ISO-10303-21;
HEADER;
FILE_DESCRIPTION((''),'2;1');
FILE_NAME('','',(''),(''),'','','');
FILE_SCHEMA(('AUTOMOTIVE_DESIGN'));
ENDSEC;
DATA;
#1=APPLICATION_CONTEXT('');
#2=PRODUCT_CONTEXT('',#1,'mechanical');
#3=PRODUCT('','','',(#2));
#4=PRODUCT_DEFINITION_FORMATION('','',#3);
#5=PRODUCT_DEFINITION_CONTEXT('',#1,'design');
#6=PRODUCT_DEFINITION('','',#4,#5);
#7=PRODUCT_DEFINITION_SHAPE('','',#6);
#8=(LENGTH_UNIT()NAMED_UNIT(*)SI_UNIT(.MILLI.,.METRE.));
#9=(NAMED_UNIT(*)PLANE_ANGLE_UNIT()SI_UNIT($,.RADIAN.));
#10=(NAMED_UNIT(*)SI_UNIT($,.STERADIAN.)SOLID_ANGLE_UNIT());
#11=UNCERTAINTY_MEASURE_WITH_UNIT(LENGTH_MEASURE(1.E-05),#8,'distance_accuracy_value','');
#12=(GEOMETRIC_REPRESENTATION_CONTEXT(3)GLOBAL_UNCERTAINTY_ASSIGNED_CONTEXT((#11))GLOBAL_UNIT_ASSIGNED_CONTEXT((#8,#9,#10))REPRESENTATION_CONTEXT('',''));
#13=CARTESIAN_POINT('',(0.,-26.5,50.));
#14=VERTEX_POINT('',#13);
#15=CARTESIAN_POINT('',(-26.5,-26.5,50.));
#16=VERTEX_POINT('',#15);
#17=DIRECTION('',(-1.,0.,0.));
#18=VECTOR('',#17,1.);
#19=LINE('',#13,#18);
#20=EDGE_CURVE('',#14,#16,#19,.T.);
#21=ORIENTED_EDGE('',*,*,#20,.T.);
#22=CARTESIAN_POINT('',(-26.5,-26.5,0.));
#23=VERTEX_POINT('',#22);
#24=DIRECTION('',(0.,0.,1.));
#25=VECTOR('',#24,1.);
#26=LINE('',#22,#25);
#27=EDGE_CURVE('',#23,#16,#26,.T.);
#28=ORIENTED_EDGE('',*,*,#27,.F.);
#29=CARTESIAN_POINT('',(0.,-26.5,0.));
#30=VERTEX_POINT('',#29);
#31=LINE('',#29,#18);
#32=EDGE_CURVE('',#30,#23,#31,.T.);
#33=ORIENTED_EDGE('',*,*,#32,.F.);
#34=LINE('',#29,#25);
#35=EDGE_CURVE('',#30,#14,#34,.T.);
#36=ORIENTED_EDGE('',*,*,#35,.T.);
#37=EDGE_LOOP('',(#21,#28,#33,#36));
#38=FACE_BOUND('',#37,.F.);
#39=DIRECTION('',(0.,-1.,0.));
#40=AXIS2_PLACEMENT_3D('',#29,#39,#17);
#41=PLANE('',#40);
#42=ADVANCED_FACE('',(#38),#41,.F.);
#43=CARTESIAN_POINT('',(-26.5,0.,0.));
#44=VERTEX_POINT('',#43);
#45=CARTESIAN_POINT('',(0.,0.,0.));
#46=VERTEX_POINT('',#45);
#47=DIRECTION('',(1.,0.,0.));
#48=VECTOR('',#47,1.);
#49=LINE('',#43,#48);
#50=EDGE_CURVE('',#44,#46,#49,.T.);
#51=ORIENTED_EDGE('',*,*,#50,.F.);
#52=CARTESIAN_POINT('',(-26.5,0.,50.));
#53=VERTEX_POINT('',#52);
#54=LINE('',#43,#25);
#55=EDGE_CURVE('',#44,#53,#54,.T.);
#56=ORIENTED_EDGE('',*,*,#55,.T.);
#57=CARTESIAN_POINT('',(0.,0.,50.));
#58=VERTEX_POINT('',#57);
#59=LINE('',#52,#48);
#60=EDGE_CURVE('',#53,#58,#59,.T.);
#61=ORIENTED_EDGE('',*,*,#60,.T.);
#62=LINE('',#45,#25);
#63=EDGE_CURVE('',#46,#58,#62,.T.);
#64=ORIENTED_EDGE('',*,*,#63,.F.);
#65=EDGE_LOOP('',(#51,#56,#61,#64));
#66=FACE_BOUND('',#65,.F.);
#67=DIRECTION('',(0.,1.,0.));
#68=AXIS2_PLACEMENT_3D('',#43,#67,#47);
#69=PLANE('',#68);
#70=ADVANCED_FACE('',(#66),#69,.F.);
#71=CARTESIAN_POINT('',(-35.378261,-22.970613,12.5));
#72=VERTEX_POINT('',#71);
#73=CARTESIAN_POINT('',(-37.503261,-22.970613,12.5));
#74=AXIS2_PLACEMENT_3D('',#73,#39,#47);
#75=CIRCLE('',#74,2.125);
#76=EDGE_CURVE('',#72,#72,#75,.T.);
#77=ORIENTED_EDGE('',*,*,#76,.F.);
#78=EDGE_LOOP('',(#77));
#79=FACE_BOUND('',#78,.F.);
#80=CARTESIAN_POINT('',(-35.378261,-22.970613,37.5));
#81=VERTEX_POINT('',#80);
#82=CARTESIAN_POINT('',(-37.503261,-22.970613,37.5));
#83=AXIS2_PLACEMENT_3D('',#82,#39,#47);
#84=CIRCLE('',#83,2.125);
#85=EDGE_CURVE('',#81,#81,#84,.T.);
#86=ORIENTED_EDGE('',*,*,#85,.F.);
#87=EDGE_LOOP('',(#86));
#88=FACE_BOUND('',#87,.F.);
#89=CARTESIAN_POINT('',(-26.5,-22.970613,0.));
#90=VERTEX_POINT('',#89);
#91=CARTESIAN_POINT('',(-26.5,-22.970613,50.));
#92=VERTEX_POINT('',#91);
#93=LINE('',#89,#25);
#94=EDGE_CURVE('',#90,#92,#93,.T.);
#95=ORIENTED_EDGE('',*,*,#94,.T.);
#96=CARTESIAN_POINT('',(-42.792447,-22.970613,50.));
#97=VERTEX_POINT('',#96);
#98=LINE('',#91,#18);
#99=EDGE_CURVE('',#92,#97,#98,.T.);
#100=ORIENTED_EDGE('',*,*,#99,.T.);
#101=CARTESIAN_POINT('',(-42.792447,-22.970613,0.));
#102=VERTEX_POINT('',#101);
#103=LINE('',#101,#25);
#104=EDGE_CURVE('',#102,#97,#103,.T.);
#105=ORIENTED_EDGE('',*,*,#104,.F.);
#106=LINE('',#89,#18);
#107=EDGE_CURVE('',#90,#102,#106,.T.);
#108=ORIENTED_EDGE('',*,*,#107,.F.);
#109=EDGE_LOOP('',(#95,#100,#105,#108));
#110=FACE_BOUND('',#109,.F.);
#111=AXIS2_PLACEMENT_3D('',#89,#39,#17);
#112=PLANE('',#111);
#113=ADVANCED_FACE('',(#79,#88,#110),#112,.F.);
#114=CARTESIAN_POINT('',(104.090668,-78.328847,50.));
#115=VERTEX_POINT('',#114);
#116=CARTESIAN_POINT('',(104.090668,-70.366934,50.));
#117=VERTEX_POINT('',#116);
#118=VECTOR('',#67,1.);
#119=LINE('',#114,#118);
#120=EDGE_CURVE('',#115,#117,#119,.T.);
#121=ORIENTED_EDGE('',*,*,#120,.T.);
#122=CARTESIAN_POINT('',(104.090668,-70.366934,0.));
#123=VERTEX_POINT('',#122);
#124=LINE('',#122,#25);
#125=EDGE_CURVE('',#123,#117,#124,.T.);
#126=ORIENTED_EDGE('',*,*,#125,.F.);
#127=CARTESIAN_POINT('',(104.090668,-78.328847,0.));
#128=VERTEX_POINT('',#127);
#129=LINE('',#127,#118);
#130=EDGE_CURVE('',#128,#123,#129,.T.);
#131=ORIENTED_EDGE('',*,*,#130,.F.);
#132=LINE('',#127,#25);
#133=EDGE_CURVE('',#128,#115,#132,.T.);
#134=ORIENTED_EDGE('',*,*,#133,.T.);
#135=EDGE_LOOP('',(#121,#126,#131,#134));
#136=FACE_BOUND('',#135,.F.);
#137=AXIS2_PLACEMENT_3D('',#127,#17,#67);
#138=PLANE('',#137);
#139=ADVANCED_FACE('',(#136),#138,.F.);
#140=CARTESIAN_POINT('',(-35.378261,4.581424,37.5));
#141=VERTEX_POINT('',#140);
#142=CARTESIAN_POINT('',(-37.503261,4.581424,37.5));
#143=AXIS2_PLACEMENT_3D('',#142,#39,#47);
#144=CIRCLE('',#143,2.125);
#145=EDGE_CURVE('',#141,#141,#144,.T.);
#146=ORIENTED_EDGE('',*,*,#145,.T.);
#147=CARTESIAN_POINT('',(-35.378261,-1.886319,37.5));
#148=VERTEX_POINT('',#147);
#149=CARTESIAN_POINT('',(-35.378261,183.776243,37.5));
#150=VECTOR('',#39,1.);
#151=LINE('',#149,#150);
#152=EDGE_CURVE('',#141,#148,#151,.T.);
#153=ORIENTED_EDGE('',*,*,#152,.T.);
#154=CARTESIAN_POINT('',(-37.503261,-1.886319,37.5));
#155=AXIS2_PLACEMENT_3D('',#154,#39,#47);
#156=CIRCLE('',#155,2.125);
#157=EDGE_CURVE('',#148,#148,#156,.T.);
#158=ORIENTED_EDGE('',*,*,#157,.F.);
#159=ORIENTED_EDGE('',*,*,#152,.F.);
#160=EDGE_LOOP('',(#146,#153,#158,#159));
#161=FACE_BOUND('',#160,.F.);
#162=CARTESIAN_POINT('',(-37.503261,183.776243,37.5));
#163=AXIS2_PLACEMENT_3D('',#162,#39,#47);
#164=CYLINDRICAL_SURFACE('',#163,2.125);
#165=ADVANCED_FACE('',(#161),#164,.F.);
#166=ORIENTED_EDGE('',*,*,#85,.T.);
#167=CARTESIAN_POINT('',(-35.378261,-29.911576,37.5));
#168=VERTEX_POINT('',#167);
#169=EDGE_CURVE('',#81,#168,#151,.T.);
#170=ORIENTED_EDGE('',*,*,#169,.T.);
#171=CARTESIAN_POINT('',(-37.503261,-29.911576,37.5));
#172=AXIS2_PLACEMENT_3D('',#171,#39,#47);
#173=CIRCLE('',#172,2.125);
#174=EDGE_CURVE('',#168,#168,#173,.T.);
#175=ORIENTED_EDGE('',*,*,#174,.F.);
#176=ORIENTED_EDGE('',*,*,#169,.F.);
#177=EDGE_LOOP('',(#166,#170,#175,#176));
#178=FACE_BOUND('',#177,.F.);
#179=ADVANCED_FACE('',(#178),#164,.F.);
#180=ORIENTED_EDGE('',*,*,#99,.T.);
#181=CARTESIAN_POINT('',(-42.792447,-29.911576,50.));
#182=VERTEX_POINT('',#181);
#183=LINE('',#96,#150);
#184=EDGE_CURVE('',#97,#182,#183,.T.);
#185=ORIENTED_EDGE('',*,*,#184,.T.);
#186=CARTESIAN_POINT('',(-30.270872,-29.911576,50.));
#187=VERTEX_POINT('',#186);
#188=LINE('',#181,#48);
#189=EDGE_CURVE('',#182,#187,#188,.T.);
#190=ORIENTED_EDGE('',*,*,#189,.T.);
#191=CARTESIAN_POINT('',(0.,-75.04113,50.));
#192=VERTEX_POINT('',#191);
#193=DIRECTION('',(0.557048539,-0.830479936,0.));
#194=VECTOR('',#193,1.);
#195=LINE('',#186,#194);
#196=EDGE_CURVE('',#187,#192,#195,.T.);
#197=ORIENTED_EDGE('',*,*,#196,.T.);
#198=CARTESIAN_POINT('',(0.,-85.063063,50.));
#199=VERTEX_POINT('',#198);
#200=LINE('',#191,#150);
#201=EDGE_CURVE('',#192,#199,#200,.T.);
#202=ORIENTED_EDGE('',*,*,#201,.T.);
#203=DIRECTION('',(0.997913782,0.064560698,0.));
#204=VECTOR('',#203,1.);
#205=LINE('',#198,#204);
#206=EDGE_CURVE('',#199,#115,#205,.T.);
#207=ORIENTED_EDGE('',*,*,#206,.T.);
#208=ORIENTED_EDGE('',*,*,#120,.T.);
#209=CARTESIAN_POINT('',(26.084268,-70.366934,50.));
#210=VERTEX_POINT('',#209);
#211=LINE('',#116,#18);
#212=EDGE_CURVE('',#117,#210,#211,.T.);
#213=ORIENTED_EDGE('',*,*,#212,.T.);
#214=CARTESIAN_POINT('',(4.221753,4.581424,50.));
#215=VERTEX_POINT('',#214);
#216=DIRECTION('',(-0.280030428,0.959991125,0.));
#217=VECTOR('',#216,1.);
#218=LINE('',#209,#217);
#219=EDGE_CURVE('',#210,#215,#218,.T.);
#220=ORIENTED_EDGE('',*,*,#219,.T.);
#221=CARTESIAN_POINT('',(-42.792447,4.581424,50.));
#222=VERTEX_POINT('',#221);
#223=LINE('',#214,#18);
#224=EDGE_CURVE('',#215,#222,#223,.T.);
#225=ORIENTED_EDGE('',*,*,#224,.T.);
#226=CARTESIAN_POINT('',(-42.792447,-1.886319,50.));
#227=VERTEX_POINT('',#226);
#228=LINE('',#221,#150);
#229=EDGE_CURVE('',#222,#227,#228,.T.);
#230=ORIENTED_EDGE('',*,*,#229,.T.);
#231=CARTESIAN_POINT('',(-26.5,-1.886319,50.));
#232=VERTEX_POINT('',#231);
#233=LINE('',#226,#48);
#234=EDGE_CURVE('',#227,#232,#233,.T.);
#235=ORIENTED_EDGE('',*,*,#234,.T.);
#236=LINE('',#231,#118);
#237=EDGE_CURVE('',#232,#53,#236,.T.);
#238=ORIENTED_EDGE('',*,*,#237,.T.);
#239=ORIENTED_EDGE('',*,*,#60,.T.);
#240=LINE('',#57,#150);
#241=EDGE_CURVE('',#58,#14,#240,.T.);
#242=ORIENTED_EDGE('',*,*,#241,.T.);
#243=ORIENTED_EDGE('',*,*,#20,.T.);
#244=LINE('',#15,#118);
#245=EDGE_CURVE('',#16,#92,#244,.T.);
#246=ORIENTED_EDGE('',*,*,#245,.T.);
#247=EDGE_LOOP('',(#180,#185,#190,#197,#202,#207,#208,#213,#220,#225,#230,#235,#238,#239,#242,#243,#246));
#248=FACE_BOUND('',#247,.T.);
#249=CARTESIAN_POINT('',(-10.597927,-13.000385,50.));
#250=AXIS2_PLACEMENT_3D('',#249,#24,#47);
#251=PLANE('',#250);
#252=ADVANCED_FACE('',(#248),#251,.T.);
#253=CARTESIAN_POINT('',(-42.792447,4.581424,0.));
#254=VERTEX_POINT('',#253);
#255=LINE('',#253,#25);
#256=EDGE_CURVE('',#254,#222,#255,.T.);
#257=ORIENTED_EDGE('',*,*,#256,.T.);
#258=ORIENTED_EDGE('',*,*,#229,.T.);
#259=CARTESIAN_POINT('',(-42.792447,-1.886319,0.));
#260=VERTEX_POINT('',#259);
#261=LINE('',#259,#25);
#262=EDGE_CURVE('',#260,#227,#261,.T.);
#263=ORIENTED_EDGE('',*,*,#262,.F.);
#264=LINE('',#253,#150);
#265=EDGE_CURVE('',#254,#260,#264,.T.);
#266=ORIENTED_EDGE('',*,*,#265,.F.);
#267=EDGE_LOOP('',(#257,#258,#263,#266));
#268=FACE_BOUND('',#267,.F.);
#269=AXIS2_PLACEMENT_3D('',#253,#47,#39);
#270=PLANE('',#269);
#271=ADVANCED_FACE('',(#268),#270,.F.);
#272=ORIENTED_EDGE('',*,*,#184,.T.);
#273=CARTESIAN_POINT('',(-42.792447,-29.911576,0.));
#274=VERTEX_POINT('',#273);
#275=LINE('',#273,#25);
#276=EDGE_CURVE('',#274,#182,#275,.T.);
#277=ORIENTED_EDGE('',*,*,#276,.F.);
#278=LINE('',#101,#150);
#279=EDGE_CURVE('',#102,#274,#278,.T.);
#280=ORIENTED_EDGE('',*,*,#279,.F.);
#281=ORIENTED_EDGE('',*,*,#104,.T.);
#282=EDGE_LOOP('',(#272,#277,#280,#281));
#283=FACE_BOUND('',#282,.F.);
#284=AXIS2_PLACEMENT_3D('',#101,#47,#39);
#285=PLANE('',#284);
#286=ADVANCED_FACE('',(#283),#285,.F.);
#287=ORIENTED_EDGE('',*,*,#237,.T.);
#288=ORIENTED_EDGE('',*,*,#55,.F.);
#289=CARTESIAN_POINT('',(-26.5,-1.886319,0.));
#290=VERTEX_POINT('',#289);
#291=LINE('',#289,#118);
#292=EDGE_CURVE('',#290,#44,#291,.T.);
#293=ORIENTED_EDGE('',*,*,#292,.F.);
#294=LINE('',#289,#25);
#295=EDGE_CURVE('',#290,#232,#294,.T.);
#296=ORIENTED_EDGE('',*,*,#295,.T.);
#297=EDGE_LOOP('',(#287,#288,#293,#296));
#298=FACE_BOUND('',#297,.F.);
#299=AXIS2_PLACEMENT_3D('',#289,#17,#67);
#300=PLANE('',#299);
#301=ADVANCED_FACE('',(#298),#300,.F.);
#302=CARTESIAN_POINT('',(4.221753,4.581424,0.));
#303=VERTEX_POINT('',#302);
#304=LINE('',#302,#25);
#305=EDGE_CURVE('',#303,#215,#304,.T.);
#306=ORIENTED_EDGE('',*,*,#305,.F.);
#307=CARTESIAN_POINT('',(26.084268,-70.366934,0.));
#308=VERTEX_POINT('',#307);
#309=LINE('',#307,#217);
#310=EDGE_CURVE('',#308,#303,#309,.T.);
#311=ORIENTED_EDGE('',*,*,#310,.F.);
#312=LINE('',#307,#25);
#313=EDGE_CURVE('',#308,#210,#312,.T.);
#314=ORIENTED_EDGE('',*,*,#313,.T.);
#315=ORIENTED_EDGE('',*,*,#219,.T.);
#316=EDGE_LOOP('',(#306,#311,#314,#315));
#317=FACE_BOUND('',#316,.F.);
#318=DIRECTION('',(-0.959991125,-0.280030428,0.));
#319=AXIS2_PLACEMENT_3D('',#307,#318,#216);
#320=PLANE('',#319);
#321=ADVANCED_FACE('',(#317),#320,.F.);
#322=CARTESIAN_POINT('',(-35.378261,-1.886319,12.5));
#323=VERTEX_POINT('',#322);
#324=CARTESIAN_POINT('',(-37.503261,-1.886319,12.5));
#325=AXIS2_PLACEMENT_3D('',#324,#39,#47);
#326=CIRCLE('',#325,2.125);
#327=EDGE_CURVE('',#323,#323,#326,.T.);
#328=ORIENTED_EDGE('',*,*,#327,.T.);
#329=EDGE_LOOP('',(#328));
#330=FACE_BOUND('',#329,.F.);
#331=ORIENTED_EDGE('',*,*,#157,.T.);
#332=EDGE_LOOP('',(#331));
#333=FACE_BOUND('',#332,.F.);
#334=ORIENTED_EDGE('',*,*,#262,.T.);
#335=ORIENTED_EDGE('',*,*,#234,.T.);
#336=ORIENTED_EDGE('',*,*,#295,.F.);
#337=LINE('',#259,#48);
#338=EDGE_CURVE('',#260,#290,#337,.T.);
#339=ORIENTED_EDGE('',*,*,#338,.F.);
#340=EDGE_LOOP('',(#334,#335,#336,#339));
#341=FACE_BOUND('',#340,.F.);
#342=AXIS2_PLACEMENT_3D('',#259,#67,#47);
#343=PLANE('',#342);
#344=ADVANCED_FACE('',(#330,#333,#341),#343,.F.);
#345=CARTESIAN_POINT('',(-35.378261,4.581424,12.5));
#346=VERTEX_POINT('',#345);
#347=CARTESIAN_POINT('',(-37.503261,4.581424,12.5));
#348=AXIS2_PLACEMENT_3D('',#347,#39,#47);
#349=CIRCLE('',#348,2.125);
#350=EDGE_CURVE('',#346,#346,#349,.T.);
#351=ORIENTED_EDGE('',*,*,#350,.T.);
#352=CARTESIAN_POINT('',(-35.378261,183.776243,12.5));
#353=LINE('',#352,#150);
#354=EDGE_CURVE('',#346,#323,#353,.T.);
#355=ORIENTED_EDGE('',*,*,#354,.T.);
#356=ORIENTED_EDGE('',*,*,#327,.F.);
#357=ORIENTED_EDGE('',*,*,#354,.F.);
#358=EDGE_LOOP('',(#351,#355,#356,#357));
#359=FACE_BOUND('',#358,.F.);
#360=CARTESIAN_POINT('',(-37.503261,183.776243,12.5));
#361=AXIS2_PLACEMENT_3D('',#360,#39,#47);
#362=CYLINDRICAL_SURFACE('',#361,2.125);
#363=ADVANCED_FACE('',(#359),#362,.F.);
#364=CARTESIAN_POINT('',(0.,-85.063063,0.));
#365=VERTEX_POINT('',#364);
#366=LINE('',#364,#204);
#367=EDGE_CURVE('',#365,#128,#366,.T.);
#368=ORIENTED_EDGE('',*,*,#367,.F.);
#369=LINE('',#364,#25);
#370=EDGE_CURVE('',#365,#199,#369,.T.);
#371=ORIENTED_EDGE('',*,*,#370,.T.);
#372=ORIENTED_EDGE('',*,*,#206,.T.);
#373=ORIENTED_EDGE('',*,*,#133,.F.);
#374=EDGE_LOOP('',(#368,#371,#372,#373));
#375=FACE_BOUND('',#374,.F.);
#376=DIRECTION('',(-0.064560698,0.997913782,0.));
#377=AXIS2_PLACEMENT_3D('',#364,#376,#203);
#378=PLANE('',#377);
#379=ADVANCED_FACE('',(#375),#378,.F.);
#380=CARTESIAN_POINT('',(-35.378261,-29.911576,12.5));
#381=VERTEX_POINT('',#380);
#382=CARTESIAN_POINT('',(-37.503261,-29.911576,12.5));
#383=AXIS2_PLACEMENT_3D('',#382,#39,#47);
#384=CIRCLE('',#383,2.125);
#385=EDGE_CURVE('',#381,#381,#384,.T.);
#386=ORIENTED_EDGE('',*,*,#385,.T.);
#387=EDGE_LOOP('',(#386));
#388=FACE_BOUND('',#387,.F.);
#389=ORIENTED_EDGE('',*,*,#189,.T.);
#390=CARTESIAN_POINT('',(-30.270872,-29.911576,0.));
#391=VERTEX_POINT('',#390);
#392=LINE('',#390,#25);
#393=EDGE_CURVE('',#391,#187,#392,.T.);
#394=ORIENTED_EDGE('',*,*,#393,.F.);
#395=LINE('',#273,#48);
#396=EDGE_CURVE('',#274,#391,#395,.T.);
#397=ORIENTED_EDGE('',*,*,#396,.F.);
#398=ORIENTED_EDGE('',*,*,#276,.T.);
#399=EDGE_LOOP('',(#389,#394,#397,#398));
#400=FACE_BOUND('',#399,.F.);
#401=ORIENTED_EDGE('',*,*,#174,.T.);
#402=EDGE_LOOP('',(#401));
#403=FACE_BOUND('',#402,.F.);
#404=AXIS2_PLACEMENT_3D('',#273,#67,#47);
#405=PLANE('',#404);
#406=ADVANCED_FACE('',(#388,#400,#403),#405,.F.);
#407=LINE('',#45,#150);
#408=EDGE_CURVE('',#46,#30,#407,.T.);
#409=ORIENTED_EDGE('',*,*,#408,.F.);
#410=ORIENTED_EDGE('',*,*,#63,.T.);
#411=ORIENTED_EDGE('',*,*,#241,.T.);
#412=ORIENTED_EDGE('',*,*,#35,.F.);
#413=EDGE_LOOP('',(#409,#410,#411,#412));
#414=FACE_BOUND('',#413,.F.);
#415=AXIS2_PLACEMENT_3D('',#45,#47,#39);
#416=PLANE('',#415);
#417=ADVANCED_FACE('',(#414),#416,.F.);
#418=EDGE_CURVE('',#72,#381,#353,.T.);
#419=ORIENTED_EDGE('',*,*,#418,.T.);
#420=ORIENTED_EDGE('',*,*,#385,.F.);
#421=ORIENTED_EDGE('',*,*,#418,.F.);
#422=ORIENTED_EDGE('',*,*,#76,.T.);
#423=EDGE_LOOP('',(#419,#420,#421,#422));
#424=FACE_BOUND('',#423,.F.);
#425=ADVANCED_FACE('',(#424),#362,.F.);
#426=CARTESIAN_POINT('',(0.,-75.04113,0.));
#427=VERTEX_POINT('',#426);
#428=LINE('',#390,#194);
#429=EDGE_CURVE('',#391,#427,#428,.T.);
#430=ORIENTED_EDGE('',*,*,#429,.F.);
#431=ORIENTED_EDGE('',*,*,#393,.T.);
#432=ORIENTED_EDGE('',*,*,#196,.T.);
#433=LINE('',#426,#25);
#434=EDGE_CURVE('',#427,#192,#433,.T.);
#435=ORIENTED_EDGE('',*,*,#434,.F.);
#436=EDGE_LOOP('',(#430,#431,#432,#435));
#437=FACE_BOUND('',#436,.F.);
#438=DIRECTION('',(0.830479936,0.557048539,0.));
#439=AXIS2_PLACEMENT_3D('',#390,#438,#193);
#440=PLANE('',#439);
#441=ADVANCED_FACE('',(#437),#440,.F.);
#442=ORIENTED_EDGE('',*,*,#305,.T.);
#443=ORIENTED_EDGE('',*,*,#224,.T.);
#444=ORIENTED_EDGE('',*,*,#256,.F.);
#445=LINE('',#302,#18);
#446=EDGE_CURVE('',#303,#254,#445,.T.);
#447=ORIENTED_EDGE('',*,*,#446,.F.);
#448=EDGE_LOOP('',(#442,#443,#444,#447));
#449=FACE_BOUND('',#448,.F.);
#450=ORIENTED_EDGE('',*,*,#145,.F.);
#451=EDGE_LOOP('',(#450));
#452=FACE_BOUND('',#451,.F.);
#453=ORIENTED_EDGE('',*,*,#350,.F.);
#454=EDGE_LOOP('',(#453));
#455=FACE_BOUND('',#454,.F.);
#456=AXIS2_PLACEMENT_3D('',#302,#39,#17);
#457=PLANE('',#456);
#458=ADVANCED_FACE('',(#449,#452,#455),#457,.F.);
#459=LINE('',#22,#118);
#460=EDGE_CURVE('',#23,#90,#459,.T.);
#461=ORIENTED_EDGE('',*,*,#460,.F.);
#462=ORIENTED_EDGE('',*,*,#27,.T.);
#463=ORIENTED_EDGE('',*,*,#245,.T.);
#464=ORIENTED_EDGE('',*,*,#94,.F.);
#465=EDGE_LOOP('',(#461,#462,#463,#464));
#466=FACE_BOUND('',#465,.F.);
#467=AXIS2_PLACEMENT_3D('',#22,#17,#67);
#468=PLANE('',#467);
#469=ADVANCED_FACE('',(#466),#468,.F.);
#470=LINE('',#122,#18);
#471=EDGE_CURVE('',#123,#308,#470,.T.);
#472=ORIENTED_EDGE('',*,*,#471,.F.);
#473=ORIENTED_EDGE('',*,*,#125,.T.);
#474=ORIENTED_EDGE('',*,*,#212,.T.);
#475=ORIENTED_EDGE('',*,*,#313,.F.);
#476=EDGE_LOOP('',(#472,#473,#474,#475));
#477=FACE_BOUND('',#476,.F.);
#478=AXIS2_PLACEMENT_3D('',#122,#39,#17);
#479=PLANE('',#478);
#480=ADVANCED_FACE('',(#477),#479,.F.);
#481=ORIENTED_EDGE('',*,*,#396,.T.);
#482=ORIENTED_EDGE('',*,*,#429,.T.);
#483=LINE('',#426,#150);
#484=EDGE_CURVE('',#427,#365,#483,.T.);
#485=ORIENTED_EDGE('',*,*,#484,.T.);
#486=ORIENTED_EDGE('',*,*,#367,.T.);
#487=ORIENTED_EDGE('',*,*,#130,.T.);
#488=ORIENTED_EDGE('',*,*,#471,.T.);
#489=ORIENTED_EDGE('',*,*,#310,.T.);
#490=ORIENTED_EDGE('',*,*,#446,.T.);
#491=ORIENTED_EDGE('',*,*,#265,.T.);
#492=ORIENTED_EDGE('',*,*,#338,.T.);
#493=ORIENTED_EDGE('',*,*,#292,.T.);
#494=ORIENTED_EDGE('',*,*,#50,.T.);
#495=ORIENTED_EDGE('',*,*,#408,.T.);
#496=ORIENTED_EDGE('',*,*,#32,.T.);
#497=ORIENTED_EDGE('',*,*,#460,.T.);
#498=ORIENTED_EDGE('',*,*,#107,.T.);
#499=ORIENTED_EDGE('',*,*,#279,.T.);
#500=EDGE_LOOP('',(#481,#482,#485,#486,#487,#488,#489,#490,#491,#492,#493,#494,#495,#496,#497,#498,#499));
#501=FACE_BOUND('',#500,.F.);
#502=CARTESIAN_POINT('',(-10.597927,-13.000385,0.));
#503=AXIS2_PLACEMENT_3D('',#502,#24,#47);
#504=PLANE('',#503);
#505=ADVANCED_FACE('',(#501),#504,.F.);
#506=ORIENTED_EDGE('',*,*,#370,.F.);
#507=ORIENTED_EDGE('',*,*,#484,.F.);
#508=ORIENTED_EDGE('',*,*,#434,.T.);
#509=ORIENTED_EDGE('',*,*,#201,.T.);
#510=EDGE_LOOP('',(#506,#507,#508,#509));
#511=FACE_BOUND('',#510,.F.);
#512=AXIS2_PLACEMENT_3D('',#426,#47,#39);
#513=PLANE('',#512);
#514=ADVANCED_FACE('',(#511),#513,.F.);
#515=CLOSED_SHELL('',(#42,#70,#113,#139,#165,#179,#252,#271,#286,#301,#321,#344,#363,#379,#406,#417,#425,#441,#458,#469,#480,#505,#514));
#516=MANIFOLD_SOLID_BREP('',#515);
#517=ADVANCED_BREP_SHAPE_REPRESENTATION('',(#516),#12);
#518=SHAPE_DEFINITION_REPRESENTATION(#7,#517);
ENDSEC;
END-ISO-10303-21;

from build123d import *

# Parameters (mm, degrees)
F1_DEPTH = 50
F3_D     = 4.25


# Not quite as in the source:
# - a feature names something its author has since deleted; it is built from what else it names


with BuildPart() as f1:
    # F0 (on Top) → F1 (new body)
    with BuildSketch(Plane.XY):
        Polygon((-30.2708722231, 4.5814236456), (-30.2708722231, 0), (-30.2708722231, -1.8863187066), (-26.5, -1.8863187066), (-26.5, 0), (0, 0), (0, -26.5), (-26.5, -26.5), (-26.5, -22.9706130922), (-30.2708722231, -22.9706130922), (-30.2708722231, -26.5), (-30.2708722231, -29.9115763544), (0, -29.9115763544), (4.2217531975, -29.9115763544), (4.2217531975, 0), (4.2217531975, 4.5814236456), align=None)
        Polygon((-30.2708722231, -1.8863187066), (-30.2708722231, 0), (-30.2708722231, 4.5814236456), (-42.7924469113, 4.5814236456), (-42.7924469113, -1.8863187066), align=None)
        Polygon((-42.7924469113, -29.9115763544), (-30.2708722231, -29.9115763544), (-30.2708722231, -26.5), (-30.2708722231, -22.9706130922), (-42.7924469113, -22.9706130922), align=None)
        Polygon((0, -75.0411301851), (0, -29.9115763544), (-30.2708722231, -29.9115763544), align=None)
        Polygon((104.0906682611, -70.3669339418), (26.0842684656, -70.3669339418), (4.2217531975, -70.3669339418), (4.2217531975, -29.9115763544), (0, -29.9115763544), (0, -75.0411301851), (0, -85.0630626082), (104.0906682611, -78.3288473744), (104.0906682611, -75.0411301851), align=None)
        Polygon((26.0842684656, -70.3669339418), (4.2217531975, 4.5814236456), (4.2217531975, 0), (4.2217531975, -29.9115763544), (4.2217531975, -70.3669339418), align=None)
    extrude(amount=F1_DEPTH)

    # F3 (through all)
    with Locations(Plane(origin=(0, 4.5814236456, 0), x_dir=(-1, 0, 0), z_dir=(0, 1, 0))):
        with Locations((37.5032611191, 37.5), (37.5032611191, 12.5)):
            Hole(F3_D / 2)


solid = f1.part
